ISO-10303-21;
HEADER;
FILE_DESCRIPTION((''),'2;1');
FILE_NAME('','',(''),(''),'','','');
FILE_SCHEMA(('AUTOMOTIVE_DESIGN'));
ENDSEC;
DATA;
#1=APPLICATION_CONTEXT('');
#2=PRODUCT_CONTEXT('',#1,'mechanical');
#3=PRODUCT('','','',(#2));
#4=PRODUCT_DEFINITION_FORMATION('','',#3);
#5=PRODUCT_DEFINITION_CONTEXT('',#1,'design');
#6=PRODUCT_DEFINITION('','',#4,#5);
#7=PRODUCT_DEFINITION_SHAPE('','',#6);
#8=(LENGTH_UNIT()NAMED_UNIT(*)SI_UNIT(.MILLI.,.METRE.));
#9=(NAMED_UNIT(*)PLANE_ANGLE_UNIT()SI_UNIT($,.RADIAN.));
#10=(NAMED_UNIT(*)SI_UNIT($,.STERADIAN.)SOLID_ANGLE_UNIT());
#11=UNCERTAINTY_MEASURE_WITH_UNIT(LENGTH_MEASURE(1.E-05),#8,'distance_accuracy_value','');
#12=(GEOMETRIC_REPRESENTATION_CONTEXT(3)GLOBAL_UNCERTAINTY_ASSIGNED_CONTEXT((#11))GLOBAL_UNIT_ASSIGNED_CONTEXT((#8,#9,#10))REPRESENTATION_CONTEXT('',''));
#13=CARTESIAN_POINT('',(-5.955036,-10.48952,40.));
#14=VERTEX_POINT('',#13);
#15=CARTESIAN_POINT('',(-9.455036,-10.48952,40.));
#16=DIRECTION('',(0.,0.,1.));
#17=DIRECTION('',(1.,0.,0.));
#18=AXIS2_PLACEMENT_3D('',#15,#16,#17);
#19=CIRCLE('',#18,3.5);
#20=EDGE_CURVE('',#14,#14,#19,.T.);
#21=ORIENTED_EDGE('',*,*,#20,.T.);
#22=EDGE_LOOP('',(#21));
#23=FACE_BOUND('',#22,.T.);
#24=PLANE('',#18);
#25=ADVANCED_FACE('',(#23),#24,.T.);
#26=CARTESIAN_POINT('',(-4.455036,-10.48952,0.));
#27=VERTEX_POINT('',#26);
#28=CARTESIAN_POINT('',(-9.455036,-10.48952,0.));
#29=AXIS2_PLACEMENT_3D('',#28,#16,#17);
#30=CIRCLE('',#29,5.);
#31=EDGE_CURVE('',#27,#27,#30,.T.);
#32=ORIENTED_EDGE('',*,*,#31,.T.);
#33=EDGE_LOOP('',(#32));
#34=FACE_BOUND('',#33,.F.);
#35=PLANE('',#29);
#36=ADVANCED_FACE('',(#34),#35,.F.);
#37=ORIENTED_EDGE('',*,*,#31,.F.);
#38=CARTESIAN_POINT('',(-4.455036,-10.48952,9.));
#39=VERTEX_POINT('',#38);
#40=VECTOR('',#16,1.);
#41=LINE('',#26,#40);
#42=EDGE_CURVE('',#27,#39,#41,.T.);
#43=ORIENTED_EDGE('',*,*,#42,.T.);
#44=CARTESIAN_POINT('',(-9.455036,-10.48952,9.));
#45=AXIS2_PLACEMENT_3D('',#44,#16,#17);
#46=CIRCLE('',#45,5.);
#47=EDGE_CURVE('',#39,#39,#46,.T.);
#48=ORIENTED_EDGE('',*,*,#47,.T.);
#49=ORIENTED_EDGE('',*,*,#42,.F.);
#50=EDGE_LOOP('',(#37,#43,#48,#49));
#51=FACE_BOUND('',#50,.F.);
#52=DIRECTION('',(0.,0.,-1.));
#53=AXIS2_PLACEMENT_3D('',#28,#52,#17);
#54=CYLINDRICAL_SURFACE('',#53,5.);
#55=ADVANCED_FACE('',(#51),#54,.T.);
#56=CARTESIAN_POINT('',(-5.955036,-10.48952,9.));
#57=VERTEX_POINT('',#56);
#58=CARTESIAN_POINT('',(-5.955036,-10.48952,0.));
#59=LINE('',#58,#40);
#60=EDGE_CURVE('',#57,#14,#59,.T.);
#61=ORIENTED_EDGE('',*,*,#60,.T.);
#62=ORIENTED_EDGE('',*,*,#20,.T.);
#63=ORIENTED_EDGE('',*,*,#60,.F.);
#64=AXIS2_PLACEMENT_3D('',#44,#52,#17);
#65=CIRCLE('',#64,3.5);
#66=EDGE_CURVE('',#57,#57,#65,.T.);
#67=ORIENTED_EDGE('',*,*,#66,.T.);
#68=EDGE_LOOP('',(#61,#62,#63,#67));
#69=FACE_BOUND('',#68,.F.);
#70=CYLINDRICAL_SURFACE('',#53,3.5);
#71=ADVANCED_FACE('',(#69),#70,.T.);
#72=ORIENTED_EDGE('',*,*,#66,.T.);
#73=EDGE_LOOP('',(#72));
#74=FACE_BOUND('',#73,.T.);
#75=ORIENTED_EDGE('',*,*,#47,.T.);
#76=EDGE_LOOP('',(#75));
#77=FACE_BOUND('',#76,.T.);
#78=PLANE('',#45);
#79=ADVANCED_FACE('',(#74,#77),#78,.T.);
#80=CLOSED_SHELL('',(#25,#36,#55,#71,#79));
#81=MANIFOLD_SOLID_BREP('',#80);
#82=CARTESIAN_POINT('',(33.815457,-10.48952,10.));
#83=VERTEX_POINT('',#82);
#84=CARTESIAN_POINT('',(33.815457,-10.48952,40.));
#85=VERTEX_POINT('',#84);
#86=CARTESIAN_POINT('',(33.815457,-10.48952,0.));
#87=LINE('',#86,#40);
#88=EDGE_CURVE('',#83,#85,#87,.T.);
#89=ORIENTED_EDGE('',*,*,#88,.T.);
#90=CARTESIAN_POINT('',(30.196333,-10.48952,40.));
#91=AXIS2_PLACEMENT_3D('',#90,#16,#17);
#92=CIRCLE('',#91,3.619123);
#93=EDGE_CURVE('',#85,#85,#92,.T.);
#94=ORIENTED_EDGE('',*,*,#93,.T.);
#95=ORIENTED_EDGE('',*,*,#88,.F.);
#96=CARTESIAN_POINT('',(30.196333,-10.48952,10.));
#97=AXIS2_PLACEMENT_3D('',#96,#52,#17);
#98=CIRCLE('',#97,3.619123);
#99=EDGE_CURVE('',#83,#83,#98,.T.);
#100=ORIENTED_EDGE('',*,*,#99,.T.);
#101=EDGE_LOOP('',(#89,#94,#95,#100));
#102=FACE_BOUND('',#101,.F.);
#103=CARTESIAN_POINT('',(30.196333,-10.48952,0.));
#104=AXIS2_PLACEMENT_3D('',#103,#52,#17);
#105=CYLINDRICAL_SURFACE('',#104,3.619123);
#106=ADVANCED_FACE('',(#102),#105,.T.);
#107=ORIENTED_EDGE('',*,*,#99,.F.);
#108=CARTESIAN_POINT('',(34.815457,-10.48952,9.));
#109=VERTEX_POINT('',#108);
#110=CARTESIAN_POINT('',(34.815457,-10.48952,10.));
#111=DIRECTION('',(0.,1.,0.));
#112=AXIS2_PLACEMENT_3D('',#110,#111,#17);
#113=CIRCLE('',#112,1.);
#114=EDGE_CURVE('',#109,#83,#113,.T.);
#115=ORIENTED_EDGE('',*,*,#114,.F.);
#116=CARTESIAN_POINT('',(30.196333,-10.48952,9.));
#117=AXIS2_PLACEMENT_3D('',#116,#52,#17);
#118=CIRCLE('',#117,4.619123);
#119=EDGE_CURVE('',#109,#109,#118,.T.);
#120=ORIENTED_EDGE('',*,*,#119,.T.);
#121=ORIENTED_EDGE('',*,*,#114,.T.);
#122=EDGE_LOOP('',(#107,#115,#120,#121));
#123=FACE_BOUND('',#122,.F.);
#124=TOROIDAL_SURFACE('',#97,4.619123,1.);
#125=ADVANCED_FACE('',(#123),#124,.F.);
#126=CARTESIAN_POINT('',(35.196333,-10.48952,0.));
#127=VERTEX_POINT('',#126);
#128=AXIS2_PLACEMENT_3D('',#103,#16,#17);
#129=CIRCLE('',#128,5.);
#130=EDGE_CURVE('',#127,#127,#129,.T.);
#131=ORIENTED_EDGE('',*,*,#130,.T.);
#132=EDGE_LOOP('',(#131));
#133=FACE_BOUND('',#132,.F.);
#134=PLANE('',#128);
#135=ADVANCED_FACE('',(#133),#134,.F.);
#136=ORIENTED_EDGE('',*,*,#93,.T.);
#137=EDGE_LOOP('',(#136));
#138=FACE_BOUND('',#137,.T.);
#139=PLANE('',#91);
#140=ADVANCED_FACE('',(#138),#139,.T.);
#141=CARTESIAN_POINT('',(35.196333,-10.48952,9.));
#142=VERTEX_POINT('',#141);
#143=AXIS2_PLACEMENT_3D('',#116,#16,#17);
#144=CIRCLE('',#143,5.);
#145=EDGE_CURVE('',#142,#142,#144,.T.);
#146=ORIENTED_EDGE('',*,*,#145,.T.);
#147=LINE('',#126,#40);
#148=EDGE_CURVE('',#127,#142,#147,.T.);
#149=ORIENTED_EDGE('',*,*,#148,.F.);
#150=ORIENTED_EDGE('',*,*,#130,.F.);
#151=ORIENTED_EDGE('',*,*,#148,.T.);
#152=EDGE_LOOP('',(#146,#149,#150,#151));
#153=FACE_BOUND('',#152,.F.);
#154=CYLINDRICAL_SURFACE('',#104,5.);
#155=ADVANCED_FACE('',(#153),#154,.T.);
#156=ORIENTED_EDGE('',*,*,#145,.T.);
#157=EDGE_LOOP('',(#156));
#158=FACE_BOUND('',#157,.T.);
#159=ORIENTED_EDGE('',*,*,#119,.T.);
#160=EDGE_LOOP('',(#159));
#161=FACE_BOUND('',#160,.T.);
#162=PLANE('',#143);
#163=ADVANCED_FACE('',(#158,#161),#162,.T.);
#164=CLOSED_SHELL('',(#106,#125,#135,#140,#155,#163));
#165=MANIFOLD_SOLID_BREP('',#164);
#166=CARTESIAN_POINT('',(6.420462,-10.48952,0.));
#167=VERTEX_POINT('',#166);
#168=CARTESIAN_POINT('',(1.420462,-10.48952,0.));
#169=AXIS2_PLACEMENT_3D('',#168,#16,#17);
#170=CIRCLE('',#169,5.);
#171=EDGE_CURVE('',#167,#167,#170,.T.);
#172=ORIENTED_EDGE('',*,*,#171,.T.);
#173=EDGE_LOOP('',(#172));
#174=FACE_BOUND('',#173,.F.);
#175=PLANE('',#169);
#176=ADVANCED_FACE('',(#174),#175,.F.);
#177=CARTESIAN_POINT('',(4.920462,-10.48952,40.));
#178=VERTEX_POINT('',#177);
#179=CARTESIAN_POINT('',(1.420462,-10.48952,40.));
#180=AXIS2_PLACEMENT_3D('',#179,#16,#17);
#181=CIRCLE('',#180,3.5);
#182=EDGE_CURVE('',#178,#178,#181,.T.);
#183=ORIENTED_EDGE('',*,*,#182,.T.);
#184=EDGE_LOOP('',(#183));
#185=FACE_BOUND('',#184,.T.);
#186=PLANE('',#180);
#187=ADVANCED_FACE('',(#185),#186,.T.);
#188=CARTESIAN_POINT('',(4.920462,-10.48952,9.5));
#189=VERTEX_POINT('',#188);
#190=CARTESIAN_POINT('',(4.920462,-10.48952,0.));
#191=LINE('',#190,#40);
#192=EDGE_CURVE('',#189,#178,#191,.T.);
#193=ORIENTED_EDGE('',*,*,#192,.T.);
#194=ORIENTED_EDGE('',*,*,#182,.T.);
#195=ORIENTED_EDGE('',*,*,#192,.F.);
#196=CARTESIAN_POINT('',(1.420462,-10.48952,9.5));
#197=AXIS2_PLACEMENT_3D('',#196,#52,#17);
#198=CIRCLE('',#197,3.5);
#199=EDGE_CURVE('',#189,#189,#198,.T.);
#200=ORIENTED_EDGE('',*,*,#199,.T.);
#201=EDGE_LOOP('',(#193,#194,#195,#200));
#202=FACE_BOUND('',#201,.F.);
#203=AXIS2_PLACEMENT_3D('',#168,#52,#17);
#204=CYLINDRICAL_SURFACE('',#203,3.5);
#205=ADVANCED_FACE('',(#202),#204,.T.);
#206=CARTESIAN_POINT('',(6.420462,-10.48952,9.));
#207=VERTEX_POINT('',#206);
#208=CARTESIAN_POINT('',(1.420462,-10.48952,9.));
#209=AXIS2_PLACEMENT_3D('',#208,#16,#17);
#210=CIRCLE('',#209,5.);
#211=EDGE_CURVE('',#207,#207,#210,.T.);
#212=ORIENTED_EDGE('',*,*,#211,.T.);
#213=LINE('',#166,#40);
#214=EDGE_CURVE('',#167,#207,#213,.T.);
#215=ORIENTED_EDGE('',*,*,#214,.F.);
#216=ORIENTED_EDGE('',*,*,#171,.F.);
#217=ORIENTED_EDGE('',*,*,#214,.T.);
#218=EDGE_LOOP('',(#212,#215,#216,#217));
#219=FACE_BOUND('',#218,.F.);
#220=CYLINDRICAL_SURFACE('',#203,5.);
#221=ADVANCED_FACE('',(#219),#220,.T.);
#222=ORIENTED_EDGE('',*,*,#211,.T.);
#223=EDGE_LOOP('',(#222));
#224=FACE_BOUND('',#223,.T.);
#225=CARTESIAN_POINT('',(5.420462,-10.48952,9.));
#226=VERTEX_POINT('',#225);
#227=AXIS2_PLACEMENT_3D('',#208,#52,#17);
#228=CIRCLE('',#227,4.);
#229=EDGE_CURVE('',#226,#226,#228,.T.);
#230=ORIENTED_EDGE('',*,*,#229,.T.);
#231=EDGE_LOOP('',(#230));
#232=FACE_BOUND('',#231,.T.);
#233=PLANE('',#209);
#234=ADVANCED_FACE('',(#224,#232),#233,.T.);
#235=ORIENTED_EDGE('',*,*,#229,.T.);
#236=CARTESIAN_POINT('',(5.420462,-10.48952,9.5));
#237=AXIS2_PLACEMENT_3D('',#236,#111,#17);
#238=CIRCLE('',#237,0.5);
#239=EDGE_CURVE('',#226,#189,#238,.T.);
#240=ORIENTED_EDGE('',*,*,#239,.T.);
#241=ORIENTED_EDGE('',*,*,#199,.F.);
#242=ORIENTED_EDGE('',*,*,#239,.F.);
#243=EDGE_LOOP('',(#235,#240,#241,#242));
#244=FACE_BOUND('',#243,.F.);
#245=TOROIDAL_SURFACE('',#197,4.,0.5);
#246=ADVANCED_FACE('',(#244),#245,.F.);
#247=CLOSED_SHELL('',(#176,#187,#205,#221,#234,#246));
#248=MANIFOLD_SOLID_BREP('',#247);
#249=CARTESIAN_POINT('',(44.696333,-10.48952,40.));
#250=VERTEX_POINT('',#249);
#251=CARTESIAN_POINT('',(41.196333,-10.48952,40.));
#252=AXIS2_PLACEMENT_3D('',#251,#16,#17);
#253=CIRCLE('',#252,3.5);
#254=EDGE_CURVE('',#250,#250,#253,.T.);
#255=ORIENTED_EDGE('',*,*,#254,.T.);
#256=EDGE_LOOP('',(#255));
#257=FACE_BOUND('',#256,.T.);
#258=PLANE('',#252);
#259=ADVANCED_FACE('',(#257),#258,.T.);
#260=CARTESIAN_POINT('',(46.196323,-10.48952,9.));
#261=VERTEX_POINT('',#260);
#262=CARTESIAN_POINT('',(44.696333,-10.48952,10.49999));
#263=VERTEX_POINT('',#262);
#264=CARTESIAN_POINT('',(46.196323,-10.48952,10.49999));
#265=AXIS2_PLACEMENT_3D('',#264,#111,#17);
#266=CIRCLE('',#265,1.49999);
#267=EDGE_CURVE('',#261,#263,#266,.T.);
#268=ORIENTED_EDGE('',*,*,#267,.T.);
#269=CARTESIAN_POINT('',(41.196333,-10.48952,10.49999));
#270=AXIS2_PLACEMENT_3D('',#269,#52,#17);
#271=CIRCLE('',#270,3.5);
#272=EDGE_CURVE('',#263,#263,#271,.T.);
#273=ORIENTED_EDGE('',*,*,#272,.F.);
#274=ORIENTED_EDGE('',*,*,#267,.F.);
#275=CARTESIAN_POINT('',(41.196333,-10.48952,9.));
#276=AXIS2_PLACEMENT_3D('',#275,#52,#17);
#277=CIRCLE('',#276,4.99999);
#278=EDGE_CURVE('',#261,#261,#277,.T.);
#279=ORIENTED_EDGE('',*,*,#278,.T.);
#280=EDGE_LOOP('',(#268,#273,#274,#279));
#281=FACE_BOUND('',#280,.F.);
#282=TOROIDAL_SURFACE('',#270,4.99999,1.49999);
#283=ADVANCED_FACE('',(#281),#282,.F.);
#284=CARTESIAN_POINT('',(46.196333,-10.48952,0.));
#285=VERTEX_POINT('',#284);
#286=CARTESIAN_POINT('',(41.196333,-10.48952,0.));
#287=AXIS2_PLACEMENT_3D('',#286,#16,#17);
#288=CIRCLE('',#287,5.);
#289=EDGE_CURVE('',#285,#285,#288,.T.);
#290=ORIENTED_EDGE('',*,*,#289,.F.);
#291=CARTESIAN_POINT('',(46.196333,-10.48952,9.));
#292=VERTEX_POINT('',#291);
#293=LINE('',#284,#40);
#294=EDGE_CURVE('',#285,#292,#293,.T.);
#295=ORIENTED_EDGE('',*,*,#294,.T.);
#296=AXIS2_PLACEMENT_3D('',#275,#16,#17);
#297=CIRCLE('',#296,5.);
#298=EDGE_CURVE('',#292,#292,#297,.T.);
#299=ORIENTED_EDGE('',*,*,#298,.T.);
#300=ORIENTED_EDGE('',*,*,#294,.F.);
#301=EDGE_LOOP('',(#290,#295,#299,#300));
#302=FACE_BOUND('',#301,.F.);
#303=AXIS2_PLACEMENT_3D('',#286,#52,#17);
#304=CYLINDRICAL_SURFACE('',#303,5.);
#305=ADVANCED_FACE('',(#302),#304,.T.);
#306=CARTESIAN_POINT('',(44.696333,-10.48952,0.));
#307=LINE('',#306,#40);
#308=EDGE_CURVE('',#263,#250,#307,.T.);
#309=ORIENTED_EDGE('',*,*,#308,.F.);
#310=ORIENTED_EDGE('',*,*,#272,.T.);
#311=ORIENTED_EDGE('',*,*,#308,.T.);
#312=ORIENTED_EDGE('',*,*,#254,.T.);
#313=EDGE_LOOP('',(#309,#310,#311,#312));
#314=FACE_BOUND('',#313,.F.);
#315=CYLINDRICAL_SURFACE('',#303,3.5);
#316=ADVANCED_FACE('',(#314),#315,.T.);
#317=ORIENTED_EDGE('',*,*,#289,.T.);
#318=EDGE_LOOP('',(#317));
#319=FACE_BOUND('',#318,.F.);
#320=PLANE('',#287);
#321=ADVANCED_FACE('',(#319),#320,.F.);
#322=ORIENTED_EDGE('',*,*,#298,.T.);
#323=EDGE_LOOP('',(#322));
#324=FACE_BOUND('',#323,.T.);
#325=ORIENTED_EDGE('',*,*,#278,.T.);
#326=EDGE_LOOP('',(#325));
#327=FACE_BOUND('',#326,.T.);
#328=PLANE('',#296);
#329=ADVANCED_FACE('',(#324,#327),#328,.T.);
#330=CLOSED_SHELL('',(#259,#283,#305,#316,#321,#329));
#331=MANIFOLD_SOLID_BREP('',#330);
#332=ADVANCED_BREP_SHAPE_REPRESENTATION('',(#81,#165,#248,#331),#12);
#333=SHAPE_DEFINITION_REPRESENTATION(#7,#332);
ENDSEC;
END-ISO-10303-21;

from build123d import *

# Parameters (mm, degrees)
F0_R     = 3.5
F1_DEPTH = 40
F0_R_2   = 3.6191233998
F2_R     = 5
F3_DEPTH = 9
F4_R     = 0.5
F5_R     = 1
F6_R     = 1.49999


# Not quite as in the source:
# - a fillet or chamfer is up to 0.001 mm smaller than in the source, because OpenCascade refuses the exact size


with BuildPart() as f1:
    # F0 (on Top) → F1 (new body)
    with BuildSketch(Plane.XY):
        with Locations((-9.4550363719, -10.4895196855)):
            Circle(F0_R)
    extrude(amount=F1_DEPTH)

    # F2 (on Top) → F3 (join)
    with BuildSketch(Plane.XY):
        with Locations((-9.4550363719, -10.4895196855)):
            Circle(F2_R)
    extrude(amount=F3_DEPTH)


with BuildPart() as f1b:
    # F0 (on Top) → F1, piece 2 (new body)
    with BuildSketch(Plane.XY):
        with Locations((1.4204620384, -10.4895196855)):
            Circle(F0_R)
    extrude(amount=F1_DEPTH)

    # F2 (on Top) → F3, piece 2 (join)
    with BuildSketch(Plane.XY):
        with Locations((1.4204620384, -10.4895196855)):
            Circle(F2_R)
    extrude(amount=F3_DEPTH)

    # F4
    f4_edges = [f1b.edges().sort_by_distance(p)[0] for p in [
        (-2.079538, -10.48952, 9),
    ]]
    fillet(f4_edges, radius=F4_R)


with BuildPart() as f1c:
    # F0 (on Top) → F1, piece 3 (new body)
    with BuildSketch(Plane.XY):
        with Locations((30.196333304, -10.4895196855)):
            Circle(F0_R_2)
    extrude(amount=F1_DEPTH)

    # F2 (on Top) → F3, piece 3 (join)
    with BuildSketch(Plane.XY):
        with Locations((30.196333304, -10.4895196855)):
            Circle(F2_R)
    extrude(amount=F3_DEPTH)

    # F5
    f5_edges = [f1c.edges().sort_by_distance(p)[0] for p in [
        (26.57721, -10.48952, 9),
    ]]
    fillet(f5_edges, radius=F5_R)


with BuildPart() as f1d:
    # F0 (on Top) → F1, piece 4 (new body)
    with BuildSketch(Plane.XY):
        with Locations((41.196333304, -10.4895196855)):
            Circle(F0_R)
    extrude(amount=F1_DEPTH)

    # F2 (on Top) → F3, piece 4 (join)
    with BuildSketch(Plane.XY):
        with Locations((41.196333304, -10.4895196855)):
            Circle(F2_R)
    extrude(amount=F3_DEPTH)

    # F6 (radius 1.5 in the source; OpenCascade refuses exactly that, so slightly less here)
    f6_edges = [f1d.edges().sort_by_distance(p)[0] for p in [
        (37.696333, -10.48952, 9),
    ]]
    fillet(f6_edges, radius=F6_R)


solid = Compound([f1.part, f1b.part, f1c.part, f1d.part])
